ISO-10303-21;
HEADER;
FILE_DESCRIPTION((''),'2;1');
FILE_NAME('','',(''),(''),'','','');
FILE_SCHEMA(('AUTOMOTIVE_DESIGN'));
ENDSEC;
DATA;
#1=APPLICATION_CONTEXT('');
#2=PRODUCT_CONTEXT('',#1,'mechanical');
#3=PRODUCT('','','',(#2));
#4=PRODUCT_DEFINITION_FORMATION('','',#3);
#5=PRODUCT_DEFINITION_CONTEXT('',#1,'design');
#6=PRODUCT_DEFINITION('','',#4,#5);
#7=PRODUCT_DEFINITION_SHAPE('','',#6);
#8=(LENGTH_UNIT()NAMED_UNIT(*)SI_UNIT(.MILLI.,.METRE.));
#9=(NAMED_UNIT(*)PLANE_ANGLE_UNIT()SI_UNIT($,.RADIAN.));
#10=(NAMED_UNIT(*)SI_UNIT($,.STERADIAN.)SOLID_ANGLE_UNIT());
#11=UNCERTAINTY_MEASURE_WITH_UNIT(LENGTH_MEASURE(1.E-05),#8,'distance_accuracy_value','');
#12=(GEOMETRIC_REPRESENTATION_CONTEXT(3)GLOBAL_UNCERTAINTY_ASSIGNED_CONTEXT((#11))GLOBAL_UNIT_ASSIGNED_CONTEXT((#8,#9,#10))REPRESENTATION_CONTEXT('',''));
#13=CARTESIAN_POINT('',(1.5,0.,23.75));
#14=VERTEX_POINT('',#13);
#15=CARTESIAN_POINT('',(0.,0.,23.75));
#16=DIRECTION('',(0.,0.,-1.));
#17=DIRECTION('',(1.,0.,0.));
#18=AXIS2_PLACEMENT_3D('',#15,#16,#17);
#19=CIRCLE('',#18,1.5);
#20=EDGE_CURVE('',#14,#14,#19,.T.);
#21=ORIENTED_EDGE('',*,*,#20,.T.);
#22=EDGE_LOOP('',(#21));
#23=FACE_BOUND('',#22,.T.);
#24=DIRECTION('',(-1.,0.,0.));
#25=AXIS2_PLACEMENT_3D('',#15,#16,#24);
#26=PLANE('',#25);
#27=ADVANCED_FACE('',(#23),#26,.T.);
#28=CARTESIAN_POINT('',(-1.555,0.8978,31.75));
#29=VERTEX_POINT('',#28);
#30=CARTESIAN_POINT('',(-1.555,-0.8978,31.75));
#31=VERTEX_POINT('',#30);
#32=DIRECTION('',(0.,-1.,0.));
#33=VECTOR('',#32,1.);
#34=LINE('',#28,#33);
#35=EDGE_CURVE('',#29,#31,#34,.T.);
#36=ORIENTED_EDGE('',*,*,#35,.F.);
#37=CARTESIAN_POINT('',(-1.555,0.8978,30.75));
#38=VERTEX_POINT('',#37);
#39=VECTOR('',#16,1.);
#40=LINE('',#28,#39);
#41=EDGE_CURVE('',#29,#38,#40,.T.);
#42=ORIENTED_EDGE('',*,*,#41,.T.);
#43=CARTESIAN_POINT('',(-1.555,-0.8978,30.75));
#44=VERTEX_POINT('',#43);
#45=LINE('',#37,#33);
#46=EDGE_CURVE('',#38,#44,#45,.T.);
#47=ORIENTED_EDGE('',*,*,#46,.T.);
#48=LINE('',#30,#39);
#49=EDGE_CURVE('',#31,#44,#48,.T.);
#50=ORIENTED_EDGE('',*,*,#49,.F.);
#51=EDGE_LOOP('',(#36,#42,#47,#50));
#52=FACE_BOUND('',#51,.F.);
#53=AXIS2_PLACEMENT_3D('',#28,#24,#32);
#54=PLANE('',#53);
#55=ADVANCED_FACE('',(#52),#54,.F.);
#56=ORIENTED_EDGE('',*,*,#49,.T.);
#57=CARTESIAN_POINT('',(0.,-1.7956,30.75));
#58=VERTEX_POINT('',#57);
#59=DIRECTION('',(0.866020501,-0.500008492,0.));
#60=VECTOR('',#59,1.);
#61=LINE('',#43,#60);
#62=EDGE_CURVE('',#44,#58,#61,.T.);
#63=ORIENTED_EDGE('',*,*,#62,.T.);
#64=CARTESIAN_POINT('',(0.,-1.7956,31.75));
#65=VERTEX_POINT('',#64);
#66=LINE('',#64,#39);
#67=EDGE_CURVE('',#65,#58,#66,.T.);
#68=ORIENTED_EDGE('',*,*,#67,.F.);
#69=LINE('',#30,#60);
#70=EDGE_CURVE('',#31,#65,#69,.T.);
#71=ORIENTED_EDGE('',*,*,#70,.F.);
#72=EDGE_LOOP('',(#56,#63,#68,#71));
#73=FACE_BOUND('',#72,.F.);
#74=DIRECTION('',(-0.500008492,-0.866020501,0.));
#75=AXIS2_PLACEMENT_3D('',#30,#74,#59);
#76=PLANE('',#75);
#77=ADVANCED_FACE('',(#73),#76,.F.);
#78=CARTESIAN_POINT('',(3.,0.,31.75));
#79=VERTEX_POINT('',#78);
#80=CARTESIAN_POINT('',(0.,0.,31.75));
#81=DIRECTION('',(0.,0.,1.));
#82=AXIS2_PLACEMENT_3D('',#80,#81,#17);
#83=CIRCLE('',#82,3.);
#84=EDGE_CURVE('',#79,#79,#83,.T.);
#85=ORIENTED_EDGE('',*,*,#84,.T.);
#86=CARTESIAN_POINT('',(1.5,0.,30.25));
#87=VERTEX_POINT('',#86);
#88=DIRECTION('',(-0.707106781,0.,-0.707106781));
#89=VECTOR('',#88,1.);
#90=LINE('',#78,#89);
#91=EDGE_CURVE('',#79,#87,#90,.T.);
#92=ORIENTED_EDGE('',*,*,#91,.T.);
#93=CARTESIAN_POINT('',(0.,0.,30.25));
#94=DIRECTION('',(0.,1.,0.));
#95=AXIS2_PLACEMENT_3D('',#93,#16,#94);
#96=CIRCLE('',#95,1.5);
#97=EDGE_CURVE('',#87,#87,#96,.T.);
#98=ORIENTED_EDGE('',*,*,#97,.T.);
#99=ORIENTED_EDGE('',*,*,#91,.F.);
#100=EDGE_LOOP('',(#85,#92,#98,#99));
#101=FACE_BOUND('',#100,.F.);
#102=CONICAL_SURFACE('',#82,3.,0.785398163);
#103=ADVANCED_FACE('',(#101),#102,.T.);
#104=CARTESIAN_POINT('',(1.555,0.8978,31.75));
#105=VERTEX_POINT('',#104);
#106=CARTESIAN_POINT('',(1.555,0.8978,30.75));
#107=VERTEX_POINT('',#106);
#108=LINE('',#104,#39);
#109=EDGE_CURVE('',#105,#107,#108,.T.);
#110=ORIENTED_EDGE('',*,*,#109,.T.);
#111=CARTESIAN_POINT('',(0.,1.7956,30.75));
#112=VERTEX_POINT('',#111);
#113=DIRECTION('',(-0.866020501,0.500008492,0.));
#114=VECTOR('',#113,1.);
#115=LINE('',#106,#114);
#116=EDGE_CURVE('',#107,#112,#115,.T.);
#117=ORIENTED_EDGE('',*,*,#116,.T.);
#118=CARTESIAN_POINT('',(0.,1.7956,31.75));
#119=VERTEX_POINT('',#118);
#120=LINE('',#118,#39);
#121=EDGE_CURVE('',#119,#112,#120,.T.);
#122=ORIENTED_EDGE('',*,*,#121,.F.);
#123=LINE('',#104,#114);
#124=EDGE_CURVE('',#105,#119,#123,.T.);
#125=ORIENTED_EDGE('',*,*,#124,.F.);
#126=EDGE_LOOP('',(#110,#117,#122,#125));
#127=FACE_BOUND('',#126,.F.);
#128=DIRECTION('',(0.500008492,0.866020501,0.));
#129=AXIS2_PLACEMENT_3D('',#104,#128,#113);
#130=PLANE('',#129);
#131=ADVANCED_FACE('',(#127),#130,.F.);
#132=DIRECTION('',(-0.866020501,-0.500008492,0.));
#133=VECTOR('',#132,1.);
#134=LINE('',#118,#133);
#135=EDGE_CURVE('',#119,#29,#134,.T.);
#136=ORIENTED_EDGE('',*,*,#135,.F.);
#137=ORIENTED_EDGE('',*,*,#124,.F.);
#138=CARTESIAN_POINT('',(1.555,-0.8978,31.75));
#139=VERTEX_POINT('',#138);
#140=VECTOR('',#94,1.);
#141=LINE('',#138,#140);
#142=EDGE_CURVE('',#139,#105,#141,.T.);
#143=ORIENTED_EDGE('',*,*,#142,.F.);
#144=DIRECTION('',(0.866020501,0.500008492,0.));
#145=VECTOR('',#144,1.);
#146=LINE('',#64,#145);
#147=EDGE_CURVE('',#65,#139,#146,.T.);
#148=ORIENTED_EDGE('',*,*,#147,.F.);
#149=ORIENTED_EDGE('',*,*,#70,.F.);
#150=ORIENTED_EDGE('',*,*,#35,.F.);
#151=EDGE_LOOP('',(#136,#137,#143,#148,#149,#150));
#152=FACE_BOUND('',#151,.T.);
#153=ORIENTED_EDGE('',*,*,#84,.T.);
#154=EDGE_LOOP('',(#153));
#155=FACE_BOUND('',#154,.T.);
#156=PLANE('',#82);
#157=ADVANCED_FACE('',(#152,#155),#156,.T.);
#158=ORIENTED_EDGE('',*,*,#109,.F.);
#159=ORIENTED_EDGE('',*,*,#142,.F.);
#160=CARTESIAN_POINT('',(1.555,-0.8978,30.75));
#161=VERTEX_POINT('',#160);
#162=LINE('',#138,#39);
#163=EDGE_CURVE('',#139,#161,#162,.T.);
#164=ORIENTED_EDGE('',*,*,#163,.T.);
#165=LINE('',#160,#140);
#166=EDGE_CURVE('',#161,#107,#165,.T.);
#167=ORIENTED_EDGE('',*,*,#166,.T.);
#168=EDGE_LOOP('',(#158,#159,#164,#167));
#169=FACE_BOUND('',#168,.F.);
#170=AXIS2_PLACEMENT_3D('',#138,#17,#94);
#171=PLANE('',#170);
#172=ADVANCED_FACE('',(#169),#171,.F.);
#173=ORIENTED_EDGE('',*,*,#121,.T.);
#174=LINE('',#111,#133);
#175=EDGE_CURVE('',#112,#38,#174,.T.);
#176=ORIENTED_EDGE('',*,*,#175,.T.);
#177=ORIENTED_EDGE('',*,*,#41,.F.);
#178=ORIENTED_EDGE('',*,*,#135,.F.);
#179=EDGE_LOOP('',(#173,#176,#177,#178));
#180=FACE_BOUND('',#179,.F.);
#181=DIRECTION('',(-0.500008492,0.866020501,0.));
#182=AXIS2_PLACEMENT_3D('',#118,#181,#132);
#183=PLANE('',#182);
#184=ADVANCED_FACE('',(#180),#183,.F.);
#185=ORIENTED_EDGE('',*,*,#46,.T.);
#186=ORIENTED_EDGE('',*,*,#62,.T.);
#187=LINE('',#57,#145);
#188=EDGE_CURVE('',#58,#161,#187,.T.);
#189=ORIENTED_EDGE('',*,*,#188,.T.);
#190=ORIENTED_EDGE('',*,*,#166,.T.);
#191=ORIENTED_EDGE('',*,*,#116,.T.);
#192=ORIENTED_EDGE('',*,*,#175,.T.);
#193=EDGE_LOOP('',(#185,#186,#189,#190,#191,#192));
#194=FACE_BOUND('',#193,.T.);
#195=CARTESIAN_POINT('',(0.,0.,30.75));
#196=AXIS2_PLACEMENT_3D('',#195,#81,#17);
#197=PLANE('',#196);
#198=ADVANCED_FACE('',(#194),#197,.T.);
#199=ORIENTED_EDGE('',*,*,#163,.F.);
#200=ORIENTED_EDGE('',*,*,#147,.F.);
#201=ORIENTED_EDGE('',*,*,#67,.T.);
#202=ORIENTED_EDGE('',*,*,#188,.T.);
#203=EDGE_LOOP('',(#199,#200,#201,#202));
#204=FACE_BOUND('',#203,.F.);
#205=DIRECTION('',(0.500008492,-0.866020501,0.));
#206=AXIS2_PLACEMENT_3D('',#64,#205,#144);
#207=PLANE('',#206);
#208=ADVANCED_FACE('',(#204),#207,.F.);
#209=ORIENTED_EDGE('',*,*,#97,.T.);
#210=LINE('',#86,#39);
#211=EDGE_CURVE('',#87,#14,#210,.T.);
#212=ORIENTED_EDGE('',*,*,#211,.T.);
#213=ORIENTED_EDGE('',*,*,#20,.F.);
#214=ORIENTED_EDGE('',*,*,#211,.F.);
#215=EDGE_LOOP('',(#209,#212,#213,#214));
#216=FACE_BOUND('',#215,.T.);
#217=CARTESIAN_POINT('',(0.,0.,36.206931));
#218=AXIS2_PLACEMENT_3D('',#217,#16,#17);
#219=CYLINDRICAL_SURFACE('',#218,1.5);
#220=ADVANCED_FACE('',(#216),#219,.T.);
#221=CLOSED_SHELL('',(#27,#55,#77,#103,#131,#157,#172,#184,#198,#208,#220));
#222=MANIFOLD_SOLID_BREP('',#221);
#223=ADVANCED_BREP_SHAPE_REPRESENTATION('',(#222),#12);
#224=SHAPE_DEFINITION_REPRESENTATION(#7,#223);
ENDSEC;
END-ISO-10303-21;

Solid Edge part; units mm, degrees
sketch "Sketch1" plane through (0, 0, 0) normal (0, 0, 1) x (1, 0, 0)
  circle A0 centre (0, 0) radius 1.5
extrude "Protrusion1" add sketch "Sketch1" along normal blind 30
sketch "Sketch2" plane through (0, 0, 30) normal (0, 0, 1) x (1, 0, 0)
  circle A0 centre (0, 0) radius 3
extrude "ExtrudedProtrusion_2" add sketch "Sketch2" along normal blind 1.75
chamfer "Chamfer_1" distance 1.75 angle 45 1 edges at (-3, 0, 30)
sketch "Sketch3" plane through (0, 0, 31.75) normal (0, 0, 1) x (0, 1, 0)
  line L0 (0.8978, -1.555) -> (1.7956, 0)
  line L1 (1.7956, 0) -> (0.8978, 1.555)
  line L2 (0.8978, 1.555) -> (-0.8978, 1.555)
  line L3 (-0.8978, 1.555) -> (-1.7956, 0)
  line L4 (-1.7956, 0) -> (-0.8978, -1.555)
  line L5 (-0.8978, -1.555) -> (0.8978, -1.555)
extrude "ExtrudedCutout_1" cut sketch "Sketch3" against normal blind 1
sketch "Sketch4" plane through (0, 0, 0) normal (0, 0, -1) x (0, 1, 0)
  circle A0 centre (0, 0) radius 1.9215
extrude "ExtrudedCutout_2" cut sketch "Sketch4" against normal blind 23.75
revolve "RevolvedCutout1" [suppressed]
fillet "Round_1" [suppressed]
properties material "Iron, grey cast type 20"
